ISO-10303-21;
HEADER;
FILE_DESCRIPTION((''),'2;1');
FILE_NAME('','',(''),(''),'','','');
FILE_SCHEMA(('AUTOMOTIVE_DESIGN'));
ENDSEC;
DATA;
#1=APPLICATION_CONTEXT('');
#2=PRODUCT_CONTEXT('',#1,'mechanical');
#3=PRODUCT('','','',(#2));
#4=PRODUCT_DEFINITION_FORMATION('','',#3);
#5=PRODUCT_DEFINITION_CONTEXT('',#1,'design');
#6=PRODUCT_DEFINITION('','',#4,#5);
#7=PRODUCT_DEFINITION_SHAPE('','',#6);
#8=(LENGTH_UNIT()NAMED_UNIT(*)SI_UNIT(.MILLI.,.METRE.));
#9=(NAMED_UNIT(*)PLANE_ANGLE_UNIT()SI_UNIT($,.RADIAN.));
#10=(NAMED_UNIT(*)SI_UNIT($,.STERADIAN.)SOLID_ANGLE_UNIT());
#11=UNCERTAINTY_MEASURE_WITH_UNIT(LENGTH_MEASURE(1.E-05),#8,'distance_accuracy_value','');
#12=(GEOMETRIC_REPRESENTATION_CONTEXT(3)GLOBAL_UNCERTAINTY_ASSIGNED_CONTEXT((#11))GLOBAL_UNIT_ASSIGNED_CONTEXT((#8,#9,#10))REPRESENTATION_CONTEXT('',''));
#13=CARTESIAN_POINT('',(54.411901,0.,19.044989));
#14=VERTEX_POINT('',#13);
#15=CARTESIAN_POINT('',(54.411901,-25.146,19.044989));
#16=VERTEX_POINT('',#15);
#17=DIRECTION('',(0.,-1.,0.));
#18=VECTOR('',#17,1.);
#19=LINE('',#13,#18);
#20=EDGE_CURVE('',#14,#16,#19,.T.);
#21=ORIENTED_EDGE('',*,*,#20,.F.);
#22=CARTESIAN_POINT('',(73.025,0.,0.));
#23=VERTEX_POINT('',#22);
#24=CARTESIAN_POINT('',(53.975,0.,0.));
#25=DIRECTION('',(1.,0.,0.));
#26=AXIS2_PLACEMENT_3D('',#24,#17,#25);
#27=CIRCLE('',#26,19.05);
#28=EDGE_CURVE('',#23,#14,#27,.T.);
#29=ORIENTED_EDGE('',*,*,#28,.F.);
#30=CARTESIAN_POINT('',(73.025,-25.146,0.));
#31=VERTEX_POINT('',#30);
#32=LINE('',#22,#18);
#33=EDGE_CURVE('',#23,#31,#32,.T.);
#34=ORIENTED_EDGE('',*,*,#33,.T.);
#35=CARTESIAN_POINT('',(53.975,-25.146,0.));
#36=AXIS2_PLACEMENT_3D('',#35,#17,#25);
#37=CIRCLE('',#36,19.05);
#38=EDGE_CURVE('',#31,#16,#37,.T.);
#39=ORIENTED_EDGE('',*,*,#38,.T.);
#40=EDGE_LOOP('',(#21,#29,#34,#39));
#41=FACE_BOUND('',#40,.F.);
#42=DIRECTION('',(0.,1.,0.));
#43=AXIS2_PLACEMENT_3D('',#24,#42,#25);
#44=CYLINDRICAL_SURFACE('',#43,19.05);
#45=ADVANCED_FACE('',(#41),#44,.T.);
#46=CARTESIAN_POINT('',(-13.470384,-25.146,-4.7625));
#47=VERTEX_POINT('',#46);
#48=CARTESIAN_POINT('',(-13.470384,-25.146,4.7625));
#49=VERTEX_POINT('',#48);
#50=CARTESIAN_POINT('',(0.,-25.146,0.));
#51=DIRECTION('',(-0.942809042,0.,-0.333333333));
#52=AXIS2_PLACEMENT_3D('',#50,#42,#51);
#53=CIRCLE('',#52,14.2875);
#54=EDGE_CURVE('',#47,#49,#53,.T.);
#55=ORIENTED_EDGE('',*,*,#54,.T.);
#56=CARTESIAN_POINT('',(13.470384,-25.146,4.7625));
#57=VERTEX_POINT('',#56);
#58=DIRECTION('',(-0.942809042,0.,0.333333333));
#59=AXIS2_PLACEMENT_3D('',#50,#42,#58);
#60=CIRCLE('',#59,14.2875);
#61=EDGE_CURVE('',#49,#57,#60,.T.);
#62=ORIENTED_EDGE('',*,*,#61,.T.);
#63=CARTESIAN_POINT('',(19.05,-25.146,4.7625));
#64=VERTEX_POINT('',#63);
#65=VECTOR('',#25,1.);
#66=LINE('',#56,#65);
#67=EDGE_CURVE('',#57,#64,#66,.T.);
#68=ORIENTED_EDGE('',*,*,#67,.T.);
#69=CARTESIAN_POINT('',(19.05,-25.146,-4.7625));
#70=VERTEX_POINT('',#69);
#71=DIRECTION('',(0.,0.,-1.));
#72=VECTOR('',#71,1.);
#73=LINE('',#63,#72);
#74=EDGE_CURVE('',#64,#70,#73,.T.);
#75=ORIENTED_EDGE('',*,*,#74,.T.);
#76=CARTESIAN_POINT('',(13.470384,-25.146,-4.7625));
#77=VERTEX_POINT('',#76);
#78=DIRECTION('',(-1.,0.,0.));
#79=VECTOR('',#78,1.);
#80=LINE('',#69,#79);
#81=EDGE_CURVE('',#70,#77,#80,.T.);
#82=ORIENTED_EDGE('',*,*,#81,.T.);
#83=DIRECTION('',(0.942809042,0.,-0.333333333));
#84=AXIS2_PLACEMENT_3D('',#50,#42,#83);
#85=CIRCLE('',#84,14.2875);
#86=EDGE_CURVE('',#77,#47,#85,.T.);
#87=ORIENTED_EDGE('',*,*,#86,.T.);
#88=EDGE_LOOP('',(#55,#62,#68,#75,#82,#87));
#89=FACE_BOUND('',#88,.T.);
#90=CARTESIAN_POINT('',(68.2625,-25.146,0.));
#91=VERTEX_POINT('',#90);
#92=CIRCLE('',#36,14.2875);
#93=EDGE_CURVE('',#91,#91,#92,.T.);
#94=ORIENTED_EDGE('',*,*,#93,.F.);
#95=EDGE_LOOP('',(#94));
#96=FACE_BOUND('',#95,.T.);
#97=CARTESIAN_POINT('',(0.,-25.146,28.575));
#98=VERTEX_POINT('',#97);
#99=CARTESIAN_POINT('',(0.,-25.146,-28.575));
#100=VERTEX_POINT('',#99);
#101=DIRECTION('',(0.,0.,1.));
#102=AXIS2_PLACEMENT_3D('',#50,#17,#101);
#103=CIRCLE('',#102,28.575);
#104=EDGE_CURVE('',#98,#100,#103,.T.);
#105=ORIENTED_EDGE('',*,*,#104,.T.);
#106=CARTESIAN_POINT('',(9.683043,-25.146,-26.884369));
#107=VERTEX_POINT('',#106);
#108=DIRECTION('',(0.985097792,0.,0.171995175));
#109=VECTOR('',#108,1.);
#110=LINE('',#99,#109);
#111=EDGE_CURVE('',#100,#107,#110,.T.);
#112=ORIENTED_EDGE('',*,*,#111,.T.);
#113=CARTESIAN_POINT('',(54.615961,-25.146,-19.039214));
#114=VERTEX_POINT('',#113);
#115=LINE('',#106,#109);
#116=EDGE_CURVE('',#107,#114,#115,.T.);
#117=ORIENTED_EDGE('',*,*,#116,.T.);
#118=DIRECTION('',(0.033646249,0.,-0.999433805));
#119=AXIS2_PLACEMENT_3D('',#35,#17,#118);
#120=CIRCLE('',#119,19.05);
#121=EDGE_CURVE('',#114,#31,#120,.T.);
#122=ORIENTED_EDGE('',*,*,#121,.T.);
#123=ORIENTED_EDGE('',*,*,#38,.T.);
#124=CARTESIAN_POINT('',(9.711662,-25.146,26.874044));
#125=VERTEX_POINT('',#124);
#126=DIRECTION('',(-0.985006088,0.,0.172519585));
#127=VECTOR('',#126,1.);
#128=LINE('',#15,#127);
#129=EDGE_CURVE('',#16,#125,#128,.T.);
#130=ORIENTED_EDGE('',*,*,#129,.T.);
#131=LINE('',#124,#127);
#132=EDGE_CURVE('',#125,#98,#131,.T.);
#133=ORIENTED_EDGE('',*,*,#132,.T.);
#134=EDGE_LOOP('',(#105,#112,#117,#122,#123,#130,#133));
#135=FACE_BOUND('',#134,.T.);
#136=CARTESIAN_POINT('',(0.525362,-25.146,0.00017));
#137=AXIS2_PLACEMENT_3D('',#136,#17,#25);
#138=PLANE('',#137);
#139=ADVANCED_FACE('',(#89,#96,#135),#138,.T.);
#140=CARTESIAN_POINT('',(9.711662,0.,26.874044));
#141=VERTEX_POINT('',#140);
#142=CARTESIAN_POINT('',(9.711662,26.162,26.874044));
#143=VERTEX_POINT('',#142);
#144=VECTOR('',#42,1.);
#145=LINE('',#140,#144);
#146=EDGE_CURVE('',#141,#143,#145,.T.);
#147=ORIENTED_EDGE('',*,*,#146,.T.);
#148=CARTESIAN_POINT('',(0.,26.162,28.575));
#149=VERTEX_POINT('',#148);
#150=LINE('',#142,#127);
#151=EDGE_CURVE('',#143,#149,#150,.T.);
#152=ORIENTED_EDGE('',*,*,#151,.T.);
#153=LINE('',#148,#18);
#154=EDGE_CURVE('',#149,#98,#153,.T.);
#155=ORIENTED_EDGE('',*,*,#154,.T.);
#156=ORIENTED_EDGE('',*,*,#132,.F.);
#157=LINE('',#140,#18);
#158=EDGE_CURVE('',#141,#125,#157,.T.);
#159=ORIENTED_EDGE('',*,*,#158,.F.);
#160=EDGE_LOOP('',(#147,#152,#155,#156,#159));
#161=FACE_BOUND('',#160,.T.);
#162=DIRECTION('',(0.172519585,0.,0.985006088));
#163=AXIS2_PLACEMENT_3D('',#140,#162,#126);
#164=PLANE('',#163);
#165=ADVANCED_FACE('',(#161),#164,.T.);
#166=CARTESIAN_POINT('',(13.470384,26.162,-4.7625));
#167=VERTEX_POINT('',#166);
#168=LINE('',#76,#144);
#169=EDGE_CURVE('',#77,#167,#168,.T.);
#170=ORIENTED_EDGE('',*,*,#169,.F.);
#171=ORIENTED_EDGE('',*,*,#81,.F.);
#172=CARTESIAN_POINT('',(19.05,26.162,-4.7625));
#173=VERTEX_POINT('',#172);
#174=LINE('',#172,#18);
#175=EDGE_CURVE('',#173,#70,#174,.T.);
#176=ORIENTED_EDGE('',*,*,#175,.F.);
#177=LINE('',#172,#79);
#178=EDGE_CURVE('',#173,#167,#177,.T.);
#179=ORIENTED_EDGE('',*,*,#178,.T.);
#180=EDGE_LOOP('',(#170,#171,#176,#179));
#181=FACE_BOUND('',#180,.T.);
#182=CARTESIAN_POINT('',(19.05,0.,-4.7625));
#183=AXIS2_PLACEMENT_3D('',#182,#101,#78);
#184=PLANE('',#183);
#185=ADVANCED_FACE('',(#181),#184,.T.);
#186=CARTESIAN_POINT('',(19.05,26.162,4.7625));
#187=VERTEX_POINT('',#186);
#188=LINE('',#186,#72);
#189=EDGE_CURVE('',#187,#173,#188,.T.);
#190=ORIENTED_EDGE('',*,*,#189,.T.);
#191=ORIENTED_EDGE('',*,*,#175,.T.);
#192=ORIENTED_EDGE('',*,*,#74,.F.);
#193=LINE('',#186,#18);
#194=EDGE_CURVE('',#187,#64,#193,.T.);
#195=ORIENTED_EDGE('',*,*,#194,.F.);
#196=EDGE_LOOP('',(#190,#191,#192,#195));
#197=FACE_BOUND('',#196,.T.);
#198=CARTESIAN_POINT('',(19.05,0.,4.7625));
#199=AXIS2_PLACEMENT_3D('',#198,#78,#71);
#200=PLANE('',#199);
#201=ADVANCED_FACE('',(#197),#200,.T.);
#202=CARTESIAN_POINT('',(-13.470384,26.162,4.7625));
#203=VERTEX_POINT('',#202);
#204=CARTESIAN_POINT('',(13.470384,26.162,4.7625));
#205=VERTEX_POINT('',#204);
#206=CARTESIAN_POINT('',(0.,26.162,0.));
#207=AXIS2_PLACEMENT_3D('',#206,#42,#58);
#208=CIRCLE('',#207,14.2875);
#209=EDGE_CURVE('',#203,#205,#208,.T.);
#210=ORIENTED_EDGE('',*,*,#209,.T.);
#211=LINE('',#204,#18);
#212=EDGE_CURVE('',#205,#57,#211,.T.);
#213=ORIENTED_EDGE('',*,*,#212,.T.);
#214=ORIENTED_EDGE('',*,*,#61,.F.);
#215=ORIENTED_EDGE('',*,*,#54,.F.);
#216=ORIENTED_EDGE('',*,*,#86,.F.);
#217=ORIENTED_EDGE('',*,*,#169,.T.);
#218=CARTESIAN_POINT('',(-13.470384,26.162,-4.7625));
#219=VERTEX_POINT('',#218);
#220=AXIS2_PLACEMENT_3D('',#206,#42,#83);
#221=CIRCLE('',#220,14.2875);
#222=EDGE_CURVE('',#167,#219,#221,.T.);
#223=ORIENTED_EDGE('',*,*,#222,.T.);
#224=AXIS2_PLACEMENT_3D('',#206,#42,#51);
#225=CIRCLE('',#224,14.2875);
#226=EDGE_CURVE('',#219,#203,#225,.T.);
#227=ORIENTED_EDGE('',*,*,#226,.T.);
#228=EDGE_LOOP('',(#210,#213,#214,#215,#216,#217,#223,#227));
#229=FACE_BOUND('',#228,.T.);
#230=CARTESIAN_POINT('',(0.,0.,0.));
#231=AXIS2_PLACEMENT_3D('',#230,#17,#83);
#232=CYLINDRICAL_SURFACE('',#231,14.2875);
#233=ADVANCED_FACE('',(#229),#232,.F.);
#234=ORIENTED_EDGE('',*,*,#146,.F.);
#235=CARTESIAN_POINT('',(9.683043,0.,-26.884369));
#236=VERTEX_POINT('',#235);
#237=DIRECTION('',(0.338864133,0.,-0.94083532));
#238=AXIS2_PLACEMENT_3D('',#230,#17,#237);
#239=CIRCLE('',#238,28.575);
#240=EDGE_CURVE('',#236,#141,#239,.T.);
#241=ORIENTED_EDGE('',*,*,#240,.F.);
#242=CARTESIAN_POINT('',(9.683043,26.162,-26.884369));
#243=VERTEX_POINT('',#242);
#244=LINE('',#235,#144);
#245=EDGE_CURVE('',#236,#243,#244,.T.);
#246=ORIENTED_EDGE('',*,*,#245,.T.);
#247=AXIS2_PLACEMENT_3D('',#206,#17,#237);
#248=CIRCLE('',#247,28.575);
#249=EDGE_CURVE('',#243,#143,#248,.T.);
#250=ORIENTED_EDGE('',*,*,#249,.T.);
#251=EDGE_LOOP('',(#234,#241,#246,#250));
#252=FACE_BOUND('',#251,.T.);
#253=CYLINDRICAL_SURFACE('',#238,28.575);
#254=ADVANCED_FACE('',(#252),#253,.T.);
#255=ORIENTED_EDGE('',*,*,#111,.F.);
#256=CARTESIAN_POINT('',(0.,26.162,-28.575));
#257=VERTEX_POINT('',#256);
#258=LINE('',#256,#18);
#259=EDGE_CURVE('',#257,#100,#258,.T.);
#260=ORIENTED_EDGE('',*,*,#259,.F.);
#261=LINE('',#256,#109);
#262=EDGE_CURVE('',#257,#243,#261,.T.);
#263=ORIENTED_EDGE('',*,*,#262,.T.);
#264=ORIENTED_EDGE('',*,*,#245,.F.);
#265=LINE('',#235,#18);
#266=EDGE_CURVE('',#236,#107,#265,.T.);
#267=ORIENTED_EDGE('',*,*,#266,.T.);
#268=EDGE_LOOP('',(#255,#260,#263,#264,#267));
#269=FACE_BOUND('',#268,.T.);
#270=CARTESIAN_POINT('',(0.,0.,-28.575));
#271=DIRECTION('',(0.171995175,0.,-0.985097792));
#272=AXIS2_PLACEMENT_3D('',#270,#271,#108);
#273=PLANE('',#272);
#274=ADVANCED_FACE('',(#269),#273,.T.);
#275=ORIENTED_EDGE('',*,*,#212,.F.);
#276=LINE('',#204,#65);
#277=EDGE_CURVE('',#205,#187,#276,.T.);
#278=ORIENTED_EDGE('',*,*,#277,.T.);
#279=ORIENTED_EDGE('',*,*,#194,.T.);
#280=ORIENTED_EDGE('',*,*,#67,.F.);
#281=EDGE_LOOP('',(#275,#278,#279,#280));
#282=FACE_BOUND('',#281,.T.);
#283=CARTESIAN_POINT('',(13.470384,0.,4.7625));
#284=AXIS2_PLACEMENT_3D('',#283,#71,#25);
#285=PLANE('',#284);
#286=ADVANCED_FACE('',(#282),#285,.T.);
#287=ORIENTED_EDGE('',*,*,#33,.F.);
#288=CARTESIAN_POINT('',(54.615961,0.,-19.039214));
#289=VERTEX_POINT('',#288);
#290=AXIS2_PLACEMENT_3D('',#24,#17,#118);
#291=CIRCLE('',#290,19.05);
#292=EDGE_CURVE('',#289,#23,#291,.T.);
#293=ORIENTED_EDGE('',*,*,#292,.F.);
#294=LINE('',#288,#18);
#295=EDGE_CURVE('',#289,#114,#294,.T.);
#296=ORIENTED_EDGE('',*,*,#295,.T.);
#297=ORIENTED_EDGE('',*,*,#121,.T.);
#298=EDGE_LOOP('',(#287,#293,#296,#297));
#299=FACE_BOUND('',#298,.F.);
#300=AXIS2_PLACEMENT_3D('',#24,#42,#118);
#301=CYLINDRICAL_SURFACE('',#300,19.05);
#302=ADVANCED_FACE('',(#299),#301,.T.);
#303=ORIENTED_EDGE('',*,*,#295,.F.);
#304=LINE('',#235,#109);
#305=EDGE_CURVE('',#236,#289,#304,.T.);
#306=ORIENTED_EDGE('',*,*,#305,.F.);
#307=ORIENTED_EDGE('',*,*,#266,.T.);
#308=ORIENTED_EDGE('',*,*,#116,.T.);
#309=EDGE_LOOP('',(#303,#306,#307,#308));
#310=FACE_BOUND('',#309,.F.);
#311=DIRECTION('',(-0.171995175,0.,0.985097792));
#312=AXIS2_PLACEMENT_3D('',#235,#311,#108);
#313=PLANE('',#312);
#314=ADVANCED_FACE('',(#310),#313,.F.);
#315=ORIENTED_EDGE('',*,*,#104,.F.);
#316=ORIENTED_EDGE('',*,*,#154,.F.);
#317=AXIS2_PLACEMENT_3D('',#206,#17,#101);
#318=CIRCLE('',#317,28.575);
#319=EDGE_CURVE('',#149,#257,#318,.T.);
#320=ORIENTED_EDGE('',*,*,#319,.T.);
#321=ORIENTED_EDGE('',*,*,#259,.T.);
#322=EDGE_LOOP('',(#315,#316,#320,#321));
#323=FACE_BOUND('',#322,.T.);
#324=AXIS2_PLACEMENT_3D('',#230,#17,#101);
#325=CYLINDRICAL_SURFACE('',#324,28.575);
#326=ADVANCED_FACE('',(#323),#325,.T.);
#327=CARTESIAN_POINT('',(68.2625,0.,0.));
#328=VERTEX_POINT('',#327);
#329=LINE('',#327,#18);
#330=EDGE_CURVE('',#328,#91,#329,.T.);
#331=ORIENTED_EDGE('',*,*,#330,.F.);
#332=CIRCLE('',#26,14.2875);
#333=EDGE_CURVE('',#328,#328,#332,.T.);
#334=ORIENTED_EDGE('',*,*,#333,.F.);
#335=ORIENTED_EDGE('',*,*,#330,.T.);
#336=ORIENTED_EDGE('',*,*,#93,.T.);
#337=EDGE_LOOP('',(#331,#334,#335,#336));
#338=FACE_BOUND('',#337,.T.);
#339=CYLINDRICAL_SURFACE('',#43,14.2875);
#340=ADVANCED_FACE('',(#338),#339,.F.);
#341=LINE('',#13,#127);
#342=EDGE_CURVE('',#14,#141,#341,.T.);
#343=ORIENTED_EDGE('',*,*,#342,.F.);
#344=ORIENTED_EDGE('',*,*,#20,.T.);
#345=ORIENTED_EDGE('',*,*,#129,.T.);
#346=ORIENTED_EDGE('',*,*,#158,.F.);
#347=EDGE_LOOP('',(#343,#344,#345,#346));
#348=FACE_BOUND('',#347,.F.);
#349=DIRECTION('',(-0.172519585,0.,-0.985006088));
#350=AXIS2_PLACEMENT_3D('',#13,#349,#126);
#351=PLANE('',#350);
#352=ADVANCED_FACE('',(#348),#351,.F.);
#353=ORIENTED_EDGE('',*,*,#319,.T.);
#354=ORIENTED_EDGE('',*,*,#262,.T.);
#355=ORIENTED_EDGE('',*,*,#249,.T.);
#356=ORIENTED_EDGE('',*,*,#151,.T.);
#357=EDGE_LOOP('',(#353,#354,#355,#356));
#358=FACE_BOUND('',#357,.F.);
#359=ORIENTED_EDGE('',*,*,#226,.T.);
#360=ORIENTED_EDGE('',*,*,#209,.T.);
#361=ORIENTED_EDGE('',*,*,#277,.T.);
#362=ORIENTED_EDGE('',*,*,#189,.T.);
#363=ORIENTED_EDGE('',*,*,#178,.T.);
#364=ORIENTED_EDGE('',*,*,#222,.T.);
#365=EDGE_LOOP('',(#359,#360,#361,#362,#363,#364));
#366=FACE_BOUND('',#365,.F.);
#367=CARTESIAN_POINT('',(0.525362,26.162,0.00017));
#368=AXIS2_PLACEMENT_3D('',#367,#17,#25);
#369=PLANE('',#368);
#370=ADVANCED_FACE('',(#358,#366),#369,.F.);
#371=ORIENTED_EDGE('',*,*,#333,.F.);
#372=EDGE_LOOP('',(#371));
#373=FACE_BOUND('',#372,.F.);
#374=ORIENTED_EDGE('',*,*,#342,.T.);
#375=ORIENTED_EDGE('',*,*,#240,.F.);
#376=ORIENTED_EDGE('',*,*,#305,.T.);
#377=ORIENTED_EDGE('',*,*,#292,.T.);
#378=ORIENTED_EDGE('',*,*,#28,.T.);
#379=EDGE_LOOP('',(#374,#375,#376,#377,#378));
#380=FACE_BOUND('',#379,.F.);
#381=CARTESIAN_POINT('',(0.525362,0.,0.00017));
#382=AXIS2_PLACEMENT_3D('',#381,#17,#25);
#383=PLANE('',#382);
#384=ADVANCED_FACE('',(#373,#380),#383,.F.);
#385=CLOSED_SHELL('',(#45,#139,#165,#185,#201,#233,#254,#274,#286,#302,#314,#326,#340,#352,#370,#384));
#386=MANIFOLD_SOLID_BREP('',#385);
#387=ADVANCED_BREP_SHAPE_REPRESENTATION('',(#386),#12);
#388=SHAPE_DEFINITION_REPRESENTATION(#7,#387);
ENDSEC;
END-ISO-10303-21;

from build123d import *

# Parameters (mm, degrees)
F0_R     = 14.2875
F1_DEPTH = 25.146
F2_DEPTH = 26.162


with BuildPart() as f1:
    # F0 (on Front) → F1 (new body)
    with BuildSketch(Plane.XZ):
        with BuildLine():
            Line((9.7116618994, 26.8740441347), (0, 28.575))
            ThreePointArc((0, 28.575), (-28.575, 0), (0, -28.575))
            Line((0, -28.575), (9.6830426125, -26.8843692648))
            ThreePointArc((9.6830426125, -26.8843692648), (23.3797301915, -16.4292069551), (28.575, 0))
            ThreePointArc((28.575, 0), (23.3884732697, 16.4167579964), (9.7116618994, 26.8740441347))
        make_face()
        with BuildLine():
            ThreePointArc((-13.4703841816, 4.7625), (0, 14.2875), (13.4703841816, 4.7625))
            Line((13.4703841816, 4.7625), (19.05, 4.7625))
            Line((19.05, 4.7625), (19.05, -4.7625))
            Line((19.05, -4.7625), (13.4703841816, -4.7625))
            ThreePointArc((13.4703841816, -4.7625), (0, -14.2875), (-13.4703841816, -4.7625))
            Line((-13.4703841816, -4.7625), (-19.05, -4.7625))
            Line((-19.05, -4.7625), (-19.05, 4.7625))
            Line((-19.05, 4.7625), (-13.4703841816, 4.7625))
        make_face(mode=Mode.SUBTRACT)
        with BuildLine():
            Line((54.4119007606, 19.0449893076), (9.7116618994, 26.8740441347))
            ThreePointArc((9.7116618994, 26.8740441347), (23.3884732697, 16.4167579964), (28.575, 0))
            ThreePointArc((28.575, 0), (23.3797301915, -16.4292069551), (9.6830426125, -26.8843692648))
            Line((9.6830426125, -26.8843692648), (54.6159610506, -19.0392139788))
            ThreePointArc((54.6159610506, -19.0392139788), (34.9252734531, -0.1020710003), (54.4119007606, 19.0449893076))
        make_face()
        with BuildLine():
            ThreePointArc((73.025, 0), (67.5989762825, 13.3150204752), (54.4119007606, 19.0449893076))
            ThreePointArc((54.4119007606, 19.0449893076), (34.9252734531, -0.1020710003), (54.6159610506, -19.0392139788))
            ThreePointArc((54.6159610506, -19.0392139788), (67.6701233659, -13.241831293), (73.025, 0))
        make_face()
        with Locations((53.975, 0)):
            Circle(F0_R, mode=Mode.SUBTRACT)
        with BuildLine():
            ThreePointArc((-13.4703841816, -4.7625), (-14.2875, 0), (-13.4703841816, 4.7625))
            Line((-13.4703841816, 4.7625), (-19.05, 4.7625))
            Line((-19.05, 4.7625), (-19.05, -4.7625))
            Line((-19.05, -4.7625), (-13.4703841816, -4.7625))
        make_face()
    extrude(amount=F1_DEPTH)

    # F0 (on Front) → F2 (join)
    with BuildSketch(Plane.XZ):
        with BuildLine():
            Line((9.7116618994, 26.8740441347), (0, 28.575))
            ThreePointArc((0, 28.575), (-28.575, 0), (0, -28.575))
            Line((0, -28.575), (9.6830426125, -26.8843692648))
            ThreePointArc((9.6830426125, -26.8843692648), (23.3797301915, -16.4292069551), (28.575, 0))
            ThreePointArc((28.575, 0), (23.3884732697, 16.4167579964), (9.7116618994, 26.8740441347))
        make_face()
        with BuildLine():
            ThreePointArc((-13.4703841816, 4.7625), (0, 14.2875), (13.4703841816, 4.7625))
            Line((13.4703841816, 4.7625), (19.05, 4.7625))
            Line((19.05, 4.7625), (19.05, -4.7625))
            Line((19.05, -4.7625), (13.4703841816, -4.7625))
            ThreePointArc((13.4703841816, -4.7625), (0, -14.2875), (-13.4703841816, -4.7625))
            Line((-13.4703841816, -4.7625), (-19.05, -4.7625))
            Line((-19.05, -4.7625), (-19.05, 4.7625))
            Line((-19.05, 4.7625), (-13.4703841816, 4.7625))
        make_face(mode=Mode.SUBTRACT)
        with BuildLine():
            ThreePointArc((-13.4703841816, -4.7625), (-14.2875, 0), (-13.4703841816, 4.7625))
            Line((-13.4703841816, 4.7625), (-19.05, 4.7625))
            Line((-19.05, 4.7625), (-19.05, -4.7625))
            Line((-19.05, -4.7625), (-13.4703841816, -4.7625))
        make_face()
    extrude(amount=-F2_DEPTH)


solid = f1.part
